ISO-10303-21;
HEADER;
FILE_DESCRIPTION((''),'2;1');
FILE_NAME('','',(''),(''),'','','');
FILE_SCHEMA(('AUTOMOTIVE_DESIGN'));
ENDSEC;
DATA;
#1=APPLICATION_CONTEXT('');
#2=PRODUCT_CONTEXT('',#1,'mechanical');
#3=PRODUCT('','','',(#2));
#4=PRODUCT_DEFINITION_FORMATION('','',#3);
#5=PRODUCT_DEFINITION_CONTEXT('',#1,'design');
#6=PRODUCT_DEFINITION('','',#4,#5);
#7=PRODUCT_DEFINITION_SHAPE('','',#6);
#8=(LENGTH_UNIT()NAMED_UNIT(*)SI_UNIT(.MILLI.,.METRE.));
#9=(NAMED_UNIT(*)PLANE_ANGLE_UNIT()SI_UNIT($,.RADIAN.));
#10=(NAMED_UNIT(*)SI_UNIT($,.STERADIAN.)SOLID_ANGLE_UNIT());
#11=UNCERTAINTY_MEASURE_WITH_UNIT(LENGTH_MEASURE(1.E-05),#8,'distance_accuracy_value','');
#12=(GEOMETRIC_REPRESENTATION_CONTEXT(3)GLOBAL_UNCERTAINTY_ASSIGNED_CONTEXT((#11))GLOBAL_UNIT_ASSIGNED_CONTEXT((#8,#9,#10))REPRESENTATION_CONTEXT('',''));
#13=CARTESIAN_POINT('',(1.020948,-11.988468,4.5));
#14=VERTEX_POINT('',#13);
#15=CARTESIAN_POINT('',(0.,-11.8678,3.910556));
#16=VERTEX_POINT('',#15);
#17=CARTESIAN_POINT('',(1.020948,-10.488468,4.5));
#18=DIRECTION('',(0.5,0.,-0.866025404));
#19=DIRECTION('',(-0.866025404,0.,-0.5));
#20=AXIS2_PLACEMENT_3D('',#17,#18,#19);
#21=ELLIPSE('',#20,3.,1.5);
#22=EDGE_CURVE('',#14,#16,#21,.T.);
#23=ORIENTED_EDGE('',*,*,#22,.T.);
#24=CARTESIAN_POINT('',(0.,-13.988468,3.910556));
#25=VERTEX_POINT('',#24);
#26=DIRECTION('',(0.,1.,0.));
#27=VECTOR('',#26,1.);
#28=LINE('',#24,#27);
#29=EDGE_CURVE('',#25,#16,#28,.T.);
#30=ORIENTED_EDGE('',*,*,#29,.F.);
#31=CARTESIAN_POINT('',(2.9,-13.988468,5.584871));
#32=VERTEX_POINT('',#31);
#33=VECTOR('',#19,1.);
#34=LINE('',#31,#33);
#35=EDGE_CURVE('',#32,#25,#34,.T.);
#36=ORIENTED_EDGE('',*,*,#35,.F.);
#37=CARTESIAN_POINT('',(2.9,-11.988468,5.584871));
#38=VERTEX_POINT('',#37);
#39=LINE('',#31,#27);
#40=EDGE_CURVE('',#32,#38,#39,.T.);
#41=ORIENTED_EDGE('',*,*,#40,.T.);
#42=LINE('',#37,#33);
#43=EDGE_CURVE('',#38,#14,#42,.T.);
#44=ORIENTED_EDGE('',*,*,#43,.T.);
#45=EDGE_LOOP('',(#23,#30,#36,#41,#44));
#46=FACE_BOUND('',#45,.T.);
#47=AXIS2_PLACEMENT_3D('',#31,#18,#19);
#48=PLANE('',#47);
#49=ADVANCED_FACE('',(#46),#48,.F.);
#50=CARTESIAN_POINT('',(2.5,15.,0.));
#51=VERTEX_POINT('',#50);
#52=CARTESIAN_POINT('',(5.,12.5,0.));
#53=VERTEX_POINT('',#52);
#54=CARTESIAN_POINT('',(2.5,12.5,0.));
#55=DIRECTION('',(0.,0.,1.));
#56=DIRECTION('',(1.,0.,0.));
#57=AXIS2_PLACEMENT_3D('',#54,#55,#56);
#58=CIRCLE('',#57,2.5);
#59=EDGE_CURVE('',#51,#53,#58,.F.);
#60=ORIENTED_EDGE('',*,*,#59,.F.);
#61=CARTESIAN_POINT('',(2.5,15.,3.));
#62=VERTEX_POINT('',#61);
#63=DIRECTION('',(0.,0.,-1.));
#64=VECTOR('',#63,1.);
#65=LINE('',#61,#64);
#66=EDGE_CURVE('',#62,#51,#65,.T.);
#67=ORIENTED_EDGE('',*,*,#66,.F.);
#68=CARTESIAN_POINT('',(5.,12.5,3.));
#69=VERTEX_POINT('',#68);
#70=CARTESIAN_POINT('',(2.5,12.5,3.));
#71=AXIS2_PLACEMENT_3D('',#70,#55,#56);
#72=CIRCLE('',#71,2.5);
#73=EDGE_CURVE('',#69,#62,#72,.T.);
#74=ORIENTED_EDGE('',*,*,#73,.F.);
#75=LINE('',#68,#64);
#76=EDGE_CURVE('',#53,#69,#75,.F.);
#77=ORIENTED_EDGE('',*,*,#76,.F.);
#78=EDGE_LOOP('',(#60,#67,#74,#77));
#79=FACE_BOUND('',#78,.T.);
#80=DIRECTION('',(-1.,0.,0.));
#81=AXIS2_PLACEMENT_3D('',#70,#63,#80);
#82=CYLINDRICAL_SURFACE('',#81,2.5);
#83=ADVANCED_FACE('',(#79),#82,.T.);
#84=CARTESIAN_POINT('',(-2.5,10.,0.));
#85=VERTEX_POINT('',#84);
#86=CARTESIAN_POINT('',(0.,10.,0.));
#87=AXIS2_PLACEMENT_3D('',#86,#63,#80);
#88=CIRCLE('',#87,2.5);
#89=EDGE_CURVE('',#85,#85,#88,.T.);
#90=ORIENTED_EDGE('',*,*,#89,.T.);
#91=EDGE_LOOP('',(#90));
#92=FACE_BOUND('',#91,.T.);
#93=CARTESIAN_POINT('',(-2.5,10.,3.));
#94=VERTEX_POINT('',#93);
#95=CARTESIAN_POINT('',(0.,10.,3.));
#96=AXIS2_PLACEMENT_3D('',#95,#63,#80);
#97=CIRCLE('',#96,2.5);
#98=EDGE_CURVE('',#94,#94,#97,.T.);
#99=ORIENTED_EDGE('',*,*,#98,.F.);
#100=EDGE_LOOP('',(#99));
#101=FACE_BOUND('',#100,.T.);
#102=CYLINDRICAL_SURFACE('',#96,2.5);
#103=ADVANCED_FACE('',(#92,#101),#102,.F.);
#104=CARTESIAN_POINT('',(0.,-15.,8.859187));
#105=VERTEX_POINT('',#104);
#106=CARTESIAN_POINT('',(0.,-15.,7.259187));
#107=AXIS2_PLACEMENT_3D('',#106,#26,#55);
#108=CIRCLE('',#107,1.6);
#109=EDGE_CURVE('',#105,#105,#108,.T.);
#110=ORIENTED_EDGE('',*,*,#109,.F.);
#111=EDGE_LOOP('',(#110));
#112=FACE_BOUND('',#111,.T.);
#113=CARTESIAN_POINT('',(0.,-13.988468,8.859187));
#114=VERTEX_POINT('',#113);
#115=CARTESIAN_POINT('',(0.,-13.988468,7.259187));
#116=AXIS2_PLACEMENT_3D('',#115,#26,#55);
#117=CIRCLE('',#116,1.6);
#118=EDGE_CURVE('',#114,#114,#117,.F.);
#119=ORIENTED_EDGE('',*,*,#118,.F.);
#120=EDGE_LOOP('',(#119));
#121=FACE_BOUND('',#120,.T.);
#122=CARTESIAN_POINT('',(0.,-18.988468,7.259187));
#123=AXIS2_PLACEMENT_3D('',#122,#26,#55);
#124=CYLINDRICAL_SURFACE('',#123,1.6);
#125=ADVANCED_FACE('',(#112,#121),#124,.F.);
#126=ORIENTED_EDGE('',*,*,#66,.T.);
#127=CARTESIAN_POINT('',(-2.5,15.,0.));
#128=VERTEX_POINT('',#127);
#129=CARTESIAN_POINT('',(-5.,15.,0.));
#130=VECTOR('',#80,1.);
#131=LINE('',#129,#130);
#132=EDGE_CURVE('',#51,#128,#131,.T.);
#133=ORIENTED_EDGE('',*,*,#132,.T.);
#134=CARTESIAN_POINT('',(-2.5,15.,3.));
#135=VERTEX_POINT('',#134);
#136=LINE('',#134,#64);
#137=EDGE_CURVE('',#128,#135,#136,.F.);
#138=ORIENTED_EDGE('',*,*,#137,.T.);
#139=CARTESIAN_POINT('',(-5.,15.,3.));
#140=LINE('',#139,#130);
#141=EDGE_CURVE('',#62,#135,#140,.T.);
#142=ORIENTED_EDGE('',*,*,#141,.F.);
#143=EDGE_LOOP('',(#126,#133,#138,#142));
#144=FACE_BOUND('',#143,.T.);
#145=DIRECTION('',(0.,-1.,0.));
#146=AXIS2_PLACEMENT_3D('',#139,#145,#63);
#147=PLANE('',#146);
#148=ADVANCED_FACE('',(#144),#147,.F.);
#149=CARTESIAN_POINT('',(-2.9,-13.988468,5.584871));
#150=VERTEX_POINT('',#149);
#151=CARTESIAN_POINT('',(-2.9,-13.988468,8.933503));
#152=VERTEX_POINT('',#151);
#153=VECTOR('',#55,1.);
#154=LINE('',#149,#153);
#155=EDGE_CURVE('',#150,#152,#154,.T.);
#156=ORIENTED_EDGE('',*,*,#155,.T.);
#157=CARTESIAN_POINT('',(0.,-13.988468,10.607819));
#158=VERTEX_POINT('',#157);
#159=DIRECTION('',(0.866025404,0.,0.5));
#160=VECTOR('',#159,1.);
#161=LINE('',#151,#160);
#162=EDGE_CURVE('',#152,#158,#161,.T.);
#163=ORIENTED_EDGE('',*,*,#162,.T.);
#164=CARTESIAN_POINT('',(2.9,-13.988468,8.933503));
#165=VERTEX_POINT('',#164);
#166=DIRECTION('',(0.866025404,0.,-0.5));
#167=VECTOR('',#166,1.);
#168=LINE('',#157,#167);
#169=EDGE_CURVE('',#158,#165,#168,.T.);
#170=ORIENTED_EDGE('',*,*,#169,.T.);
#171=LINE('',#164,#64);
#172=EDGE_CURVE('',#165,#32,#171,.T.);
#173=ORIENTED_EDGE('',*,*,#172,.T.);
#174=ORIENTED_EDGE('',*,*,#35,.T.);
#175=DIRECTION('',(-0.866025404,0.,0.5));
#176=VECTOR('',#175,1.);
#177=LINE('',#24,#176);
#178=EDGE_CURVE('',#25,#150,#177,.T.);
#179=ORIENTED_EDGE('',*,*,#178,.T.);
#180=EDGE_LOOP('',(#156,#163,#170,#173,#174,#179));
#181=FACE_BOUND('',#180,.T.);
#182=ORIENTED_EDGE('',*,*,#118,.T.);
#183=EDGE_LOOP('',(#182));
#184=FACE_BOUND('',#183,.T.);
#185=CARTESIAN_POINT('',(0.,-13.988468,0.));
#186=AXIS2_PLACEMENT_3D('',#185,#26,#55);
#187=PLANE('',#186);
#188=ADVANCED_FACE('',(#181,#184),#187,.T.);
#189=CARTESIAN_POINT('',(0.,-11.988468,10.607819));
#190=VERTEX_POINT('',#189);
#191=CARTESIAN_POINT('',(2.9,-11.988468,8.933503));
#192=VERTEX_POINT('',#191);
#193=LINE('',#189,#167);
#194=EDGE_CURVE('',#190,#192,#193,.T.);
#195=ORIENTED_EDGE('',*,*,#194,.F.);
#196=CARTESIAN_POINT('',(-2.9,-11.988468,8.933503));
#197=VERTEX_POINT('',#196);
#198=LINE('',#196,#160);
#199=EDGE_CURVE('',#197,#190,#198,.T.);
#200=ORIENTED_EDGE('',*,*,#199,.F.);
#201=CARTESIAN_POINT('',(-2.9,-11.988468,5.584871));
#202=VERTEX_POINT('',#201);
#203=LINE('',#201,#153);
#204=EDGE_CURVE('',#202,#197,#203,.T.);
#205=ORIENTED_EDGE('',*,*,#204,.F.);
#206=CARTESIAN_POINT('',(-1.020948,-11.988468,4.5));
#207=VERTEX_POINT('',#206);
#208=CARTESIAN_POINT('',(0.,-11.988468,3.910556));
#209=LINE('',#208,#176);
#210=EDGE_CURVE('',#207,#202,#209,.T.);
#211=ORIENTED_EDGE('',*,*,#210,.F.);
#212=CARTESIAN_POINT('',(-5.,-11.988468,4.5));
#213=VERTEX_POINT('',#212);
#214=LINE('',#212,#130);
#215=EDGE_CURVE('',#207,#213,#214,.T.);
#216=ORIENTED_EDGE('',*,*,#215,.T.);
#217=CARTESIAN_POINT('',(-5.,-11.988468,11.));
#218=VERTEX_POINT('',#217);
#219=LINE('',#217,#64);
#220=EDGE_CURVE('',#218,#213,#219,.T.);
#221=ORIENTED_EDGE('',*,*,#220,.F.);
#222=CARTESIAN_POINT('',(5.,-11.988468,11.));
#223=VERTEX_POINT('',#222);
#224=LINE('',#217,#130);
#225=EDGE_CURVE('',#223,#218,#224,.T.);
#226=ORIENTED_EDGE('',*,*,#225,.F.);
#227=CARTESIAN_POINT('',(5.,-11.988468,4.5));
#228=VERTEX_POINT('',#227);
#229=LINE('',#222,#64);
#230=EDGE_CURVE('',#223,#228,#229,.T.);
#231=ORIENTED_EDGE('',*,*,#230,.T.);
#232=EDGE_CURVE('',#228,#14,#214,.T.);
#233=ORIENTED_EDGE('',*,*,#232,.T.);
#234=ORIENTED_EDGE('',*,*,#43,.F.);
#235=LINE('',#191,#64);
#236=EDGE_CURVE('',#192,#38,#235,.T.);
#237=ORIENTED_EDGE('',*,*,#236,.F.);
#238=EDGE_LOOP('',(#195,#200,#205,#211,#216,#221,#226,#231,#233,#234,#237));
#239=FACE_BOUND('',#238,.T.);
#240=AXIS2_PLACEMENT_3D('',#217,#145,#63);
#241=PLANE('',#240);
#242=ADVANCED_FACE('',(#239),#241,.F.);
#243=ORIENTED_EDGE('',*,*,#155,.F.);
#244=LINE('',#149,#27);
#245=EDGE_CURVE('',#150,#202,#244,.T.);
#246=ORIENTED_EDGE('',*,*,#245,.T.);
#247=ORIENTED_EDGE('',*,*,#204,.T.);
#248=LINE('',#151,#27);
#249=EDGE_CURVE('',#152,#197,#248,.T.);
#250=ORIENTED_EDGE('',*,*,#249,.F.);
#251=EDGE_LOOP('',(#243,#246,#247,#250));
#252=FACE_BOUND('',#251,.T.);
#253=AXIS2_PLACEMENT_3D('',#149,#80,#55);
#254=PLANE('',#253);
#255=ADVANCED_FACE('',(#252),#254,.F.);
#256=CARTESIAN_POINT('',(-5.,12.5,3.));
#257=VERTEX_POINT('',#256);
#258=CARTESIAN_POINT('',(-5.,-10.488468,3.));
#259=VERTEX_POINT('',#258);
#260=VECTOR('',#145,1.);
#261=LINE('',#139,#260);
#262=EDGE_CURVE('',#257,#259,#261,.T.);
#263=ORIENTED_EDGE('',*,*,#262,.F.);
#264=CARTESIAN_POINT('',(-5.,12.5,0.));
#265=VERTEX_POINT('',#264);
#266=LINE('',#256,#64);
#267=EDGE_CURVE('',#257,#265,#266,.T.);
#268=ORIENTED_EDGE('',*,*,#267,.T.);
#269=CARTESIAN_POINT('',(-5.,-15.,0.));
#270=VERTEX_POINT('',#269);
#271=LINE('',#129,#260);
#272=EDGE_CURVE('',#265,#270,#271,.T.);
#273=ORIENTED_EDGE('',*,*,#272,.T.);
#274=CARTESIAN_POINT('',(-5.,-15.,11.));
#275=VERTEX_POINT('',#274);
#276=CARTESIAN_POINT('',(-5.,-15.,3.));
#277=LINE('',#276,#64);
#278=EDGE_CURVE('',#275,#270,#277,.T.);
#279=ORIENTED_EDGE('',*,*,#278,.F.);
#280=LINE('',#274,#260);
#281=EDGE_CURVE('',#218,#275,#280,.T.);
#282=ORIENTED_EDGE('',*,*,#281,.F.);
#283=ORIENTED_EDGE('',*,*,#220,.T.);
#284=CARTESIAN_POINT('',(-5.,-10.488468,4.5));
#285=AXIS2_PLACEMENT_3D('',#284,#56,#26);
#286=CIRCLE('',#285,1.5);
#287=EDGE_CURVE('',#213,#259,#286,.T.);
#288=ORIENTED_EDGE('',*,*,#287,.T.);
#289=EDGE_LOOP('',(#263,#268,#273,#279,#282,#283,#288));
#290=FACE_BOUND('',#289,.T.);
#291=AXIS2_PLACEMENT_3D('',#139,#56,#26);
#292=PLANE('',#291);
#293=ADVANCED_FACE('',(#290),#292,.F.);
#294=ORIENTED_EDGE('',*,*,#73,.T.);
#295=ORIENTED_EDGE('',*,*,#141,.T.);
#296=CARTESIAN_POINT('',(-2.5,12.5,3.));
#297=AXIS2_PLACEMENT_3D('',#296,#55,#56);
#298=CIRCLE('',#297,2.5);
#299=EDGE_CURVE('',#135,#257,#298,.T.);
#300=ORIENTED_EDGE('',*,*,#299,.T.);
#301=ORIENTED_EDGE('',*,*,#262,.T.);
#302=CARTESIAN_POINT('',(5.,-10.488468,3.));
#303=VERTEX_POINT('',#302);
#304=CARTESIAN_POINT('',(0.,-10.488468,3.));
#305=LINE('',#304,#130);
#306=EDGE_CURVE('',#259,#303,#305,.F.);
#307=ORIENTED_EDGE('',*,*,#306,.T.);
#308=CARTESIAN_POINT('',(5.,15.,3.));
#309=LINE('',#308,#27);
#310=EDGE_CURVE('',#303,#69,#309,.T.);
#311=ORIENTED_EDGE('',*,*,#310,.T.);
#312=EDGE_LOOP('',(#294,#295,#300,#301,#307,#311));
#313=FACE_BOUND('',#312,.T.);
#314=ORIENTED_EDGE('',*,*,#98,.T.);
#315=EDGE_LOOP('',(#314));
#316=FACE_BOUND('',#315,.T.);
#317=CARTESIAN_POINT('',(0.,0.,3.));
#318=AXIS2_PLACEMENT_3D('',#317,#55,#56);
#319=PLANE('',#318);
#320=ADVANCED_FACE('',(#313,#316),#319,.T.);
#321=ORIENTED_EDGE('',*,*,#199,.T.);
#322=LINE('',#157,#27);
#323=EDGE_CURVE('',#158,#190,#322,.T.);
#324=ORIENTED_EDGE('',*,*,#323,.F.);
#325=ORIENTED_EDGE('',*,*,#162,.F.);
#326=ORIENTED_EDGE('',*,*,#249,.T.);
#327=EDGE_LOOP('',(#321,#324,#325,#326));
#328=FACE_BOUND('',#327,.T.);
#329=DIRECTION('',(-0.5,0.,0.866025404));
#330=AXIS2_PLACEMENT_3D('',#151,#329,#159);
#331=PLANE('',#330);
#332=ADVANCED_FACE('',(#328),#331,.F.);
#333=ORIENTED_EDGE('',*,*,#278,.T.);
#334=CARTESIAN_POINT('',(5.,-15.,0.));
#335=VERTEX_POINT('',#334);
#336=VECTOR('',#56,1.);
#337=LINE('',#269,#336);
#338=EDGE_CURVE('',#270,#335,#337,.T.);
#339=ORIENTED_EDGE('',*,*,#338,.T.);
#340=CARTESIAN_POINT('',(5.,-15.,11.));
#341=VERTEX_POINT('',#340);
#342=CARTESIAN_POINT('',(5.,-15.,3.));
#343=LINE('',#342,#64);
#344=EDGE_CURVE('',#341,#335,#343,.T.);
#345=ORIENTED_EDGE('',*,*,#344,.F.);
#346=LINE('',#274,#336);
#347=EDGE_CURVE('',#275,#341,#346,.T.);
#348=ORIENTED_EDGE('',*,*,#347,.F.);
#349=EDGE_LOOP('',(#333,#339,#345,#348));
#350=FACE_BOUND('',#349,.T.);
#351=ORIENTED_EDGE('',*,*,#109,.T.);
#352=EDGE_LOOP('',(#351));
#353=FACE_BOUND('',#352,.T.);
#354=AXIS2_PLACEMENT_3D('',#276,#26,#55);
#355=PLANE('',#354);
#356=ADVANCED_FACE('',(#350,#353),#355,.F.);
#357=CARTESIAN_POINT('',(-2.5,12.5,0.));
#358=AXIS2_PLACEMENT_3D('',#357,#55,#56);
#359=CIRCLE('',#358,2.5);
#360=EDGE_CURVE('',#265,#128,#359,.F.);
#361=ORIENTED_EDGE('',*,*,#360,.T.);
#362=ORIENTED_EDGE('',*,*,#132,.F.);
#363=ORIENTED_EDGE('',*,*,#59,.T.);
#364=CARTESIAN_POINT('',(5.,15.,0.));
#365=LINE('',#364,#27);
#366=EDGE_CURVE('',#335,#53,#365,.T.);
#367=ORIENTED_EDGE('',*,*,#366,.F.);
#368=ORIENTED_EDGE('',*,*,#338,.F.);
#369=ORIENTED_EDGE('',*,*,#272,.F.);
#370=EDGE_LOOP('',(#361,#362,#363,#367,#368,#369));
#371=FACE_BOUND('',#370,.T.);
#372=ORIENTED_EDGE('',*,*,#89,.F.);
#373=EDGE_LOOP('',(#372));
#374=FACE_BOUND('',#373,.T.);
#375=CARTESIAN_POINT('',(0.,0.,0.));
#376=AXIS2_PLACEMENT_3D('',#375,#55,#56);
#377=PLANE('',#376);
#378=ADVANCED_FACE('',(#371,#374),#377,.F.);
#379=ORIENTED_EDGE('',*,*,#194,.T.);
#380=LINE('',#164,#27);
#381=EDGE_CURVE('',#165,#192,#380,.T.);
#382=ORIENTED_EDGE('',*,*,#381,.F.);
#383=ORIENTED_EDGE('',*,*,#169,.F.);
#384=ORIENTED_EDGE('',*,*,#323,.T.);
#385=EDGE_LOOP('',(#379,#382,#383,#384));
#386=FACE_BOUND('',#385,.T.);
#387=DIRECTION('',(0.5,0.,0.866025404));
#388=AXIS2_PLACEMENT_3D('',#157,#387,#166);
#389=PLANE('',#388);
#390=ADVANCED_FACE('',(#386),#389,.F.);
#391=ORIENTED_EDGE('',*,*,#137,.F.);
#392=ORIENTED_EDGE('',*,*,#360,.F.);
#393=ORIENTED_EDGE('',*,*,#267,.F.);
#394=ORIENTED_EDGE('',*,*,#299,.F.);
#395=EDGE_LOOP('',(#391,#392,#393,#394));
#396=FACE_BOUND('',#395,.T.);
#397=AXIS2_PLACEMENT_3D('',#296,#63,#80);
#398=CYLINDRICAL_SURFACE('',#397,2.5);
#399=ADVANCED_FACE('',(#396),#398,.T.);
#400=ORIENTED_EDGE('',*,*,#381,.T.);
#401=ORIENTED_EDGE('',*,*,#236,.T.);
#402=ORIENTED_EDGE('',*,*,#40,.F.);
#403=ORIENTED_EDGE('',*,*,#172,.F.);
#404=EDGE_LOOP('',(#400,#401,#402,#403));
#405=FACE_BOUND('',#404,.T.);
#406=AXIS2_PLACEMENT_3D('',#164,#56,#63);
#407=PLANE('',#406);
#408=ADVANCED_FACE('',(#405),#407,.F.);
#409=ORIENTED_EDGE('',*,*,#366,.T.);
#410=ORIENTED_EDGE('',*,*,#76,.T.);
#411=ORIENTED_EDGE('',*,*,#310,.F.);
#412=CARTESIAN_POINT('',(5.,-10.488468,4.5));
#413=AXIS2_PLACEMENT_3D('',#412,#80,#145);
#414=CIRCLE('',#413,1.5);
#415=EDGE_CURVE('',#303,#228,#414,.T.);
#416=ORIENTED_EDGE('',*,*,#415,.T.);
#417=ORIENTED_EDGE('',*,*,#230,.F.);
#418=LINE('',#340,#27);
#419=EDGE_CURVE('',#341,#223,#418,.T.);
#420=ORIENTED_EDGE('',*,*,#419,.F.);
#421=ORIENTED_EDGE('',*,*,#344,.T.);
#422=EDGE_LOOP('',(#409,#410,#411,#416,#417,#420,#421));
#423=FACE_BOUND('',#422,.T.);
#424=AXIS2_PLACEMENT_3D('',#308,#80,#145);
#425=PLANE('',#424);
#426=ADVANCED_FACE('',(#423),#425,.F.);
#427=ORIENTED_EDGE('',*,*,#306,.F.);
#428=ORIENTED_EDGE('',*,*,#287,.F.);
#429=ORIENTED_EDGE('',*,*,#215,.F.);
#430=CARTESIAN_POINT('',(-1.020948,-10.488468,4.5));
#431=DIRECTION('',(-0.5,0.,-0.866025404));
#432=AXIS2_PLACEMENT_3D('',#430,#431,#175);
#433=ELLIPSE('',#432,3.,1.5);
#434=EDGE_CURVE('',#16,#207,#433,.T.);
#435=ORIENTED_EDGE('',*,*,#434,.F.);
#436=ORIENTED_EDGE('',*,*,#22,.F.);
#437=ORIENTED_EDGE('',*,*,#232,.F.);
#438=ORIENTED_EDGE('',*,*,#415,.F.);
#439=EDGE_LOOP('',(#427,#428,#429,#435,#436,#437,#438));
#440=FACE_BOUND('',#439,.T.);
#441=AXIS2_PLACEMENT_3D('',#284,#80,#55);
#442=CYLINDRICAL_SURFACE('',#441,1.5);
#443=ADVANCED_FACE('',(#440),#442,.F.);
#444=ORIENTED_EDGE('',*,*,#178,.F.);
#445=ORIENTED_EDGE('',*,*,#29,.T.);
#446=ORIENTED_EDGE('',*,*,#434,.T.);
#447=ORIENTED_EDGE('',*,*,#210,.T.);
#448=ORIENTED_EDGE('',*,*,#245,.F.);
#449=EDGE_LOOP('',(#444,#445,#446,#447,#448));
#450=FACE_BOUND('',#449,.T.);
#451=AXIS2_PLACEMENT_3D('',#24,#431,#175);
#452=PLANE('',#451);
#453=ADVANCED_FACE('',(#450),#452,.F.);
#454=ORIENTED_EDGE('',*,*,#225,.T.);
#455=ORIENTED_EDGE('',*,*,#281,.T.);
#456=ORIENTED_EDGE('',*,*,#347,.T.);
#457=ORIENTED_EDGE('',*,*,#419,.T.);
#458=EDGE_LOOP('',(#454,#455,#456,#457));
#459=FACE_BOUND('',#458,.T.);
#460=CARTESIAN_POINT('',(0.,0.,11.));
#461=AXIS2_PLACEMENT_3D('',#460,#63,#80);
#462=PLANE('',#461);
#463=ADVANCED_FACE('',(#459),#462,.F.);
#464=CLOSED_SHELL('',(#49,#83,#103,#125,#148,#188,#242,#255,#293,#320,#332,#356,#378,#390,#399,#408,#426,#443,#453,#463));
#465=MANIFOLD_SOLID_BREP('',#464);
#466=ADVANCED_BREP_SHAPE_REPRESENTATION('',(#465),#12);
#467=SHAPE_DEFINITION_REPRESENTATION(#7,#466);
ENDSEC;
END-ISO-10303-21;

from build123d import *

# Parameters (mm, degrees)
SKETCH_1_W          = 10
SKETCH_1_H          = 30
EXTRUDE_1_DEPTH     = 3
SKETCH_2_R          = 2.5
CUT_EXTRUDE_1_DEPTH = 3
FILLET_2_R          = 2.5
FILLET_3_R          = 2.5
SKETCH_3_W          = 10
SKETCH_3_H          = 3.011531622
EXTRUDE_2_DEPTH     = 8
SKETCH_4_R          = 1.6
CUT_EXTRUDE_2_DEPTH = 7
CUT_EXTRUDE_3_DEPTH = 2
FILLET_4_R          = 1.5


with BuildPart() as part:
    # Эскиз1 → Бобышка-Вытянуть1 (new body)
    with BuildSketch(Plane.XY):
        Rectangle(SKETCH_1_W, SKETCH_1_H)
    extrude(amount=EXTRUDE_1_DEPTH)

    # Эскиз2 → Вырез-Вытянуть1 (cut)
    with BuildSketch(Plane(origin=(0, 0, 0), x_dir=(-1, 0, 0), z_dir=(0, 0, -1))):
        with Locations((0, 10)):
            Circle(SKETCH_2_R)
    extrude(amount=-CUT_EXTRUDE_1_DEPTH, mode=Mode.SUBTRACT)

    # Скругление2
    fillet_2_edges = [part.edges().sort_by_distance(p)[0] for p in [
        (5, 15, 1.5),
    ]]
    fillet(fillet_2_edges, radius=FILLET_2_R)

    # Скругление3
    fillet_3_edges = [part.edges().sort_by_distance(p)[0] for p in [
        (-5, 15, 1.5),
    ]]
    fillet(fillet_3_edges, radius=FILLET_3_R)

    # Эскиз3 → Бобышка-Вытянуть2 (add)
    with BuildSketch(Plane.XY.offset(3)):
        with Locations((0, -13.494234189)):
            Rectangle(SKETCH_3_W, SKETCH_3_H)
    extrude(amount=EXTRUDE_2_DEPTH)

    # Эскиз4 → Вырез-Вытянуть2 (cut)
    with BuildSketch(Plane(origin=(0, -11.988468378, 0), x_dir=(1, 0, 0), z_dir=(0, 1, 0))):
        with Locations(Location((0, -7.259187187, 0), (0, 0, 270))):
            Circle(SKETCH_4_R)
    extrude(amount=-CUT_EXTRUDE_2_DEPTH, mode=Mode.SUBTRACT)

    # Эскиз6 → Вырез-Вытянуть3 (cut)
    with BuildSketch(Plane(origin=(0, -11.988468378, 0), x_dir=(1, 0, 0), z_dir=(0, 1, 0))):
        Polygon((2.9, -8.933502968), (2.9, -5.584871406), (0, -3.910555626), (-2.9, -5.584871406), (-2.9, -8.933502968), (0, -10.607818748), align=None)
    extrude(amount=-CUT_EXTRUDE_3_DEPTH, mode=Mode.SUBTRACT)

    # Скругление4
    # the kernel refuses this fillet: 1.5 mm, written as the material it adds along each edge
    with BuildSketch(Plane(origin=(5, -11.988468378, 3), x_dir=(0, 1, 0), z_dir=(-1, 0, 0))) as fillet_4_piece_1_section:
        with BuildLine():
            CenterArc((FILLET_4_R, -FILLET_4_R), FILLET_4_R, 90, 90)
            Line((0, -FILLET_4_R), (0, 0))
            Line((0, 0), (FILLET_4_R, 0))
        make_face()
    fillet_4_piece_1 = extrude(amount=10, mode=Mode.PRIVATE)
    fillet_4_piece_1 = split(fillet_4_piece_1, bisect_by=Plane(origin=(2.478209897, -11.671443833, 2.479760474), z_dir=(0.49999999999999983, 0, 0.8660254037844388)), keep=Keep.TOP, mode=Mode.PRIVATE)
    fillet_4_piece_1 = split(fillet_4_piece_1, bisect_by=Plane(origin=(2.013101716, -11.671443833, 5.072820443), z_dir=(0.49999999999999994, 0, -0.8660254037844387)), keep=Keep.TOP, mode=Mode.PRIVATE)
    add(fillet_4_piece_1)
    with BuildSketch(Plane(origin=(5, -11.988468378, 3), x_dir=(0, 1, 0), z_dir=(-1, 0, 0))) as fillet_4_piece_2_section:
        with BuildLine():
            CenterArc((FILLET_4_R, -FILLET_4_R), FILLET_4_R, 90, 90)
            Line((0, -FILLET_4_R), (0, 0))
            Line((0, 0), (FILLET_4_R, 0))
        make_face()
    fillet_4_piece_2 = extrude(amount=10, mode=Mode.PRIVATE)
    fillet_4_piece_2 = split(fillet_4_piece_2, bisect_by=Plane(origin=(0.3145023, -11.552147507, 3.728977638), z_dir=(-0.49999999999999983, 0, -0.8660254037844388)), keep=Keep.TOP, mode=Mode.PRIVATE)
    fillet_4_piece_2 = split(fillet_4_piece_2, bisect_by=Plane(origin=(-0.3145023, -11.552147507, 3.728977638), z_dir=(0.49999999999999994, 0, -0.8660254037844387)), keep=Keep.TOP, mode=Mode.PRIVATE)
    add(fillet_4_piece_2)
    with BuildSketch(Plane(origin=(5, -11.988468378, 3), x_dir=(0, 1, 0), z_dir=(-1, 0, 0))) as fillet_4_piece_3_section:
        with BuildLine():
            CenterArc((FILLET_4_R, -FILLET_4_R), FILLET_4_R, 90, 90)
            Line((0, -FILLET_4_R), (0, 0))
            Line((0, 0), (FILLET_4_R, 0))
        make_face()
    fillet_4_piece_3 = extrude(amount=10, mode=Mode.PRIVATE)
    fillet_4_piece_3 = split(fillet_4_piece_3, bisect_by=Plane(origin=(-2.013101716, -11.671443833, 5.072820443), z_dir=(-0.49999999999999983, 0, -0.8660254037844388)), keep=Keep.TOP, mode=Mode.PRIVATE)
    fillet_4_piece_3 = split(fillet_4_piece_3, bisect_by=Plane(origin=(-2.478209897, -11.671443833, 2.479760474), z_dir=(-0.49999999999999994, 0, 0.8660254037844387)), keep=Keep.TOP, mode=Mode.PRIVATE)
    add(fillet_4_piece_3)


solid = part.part
